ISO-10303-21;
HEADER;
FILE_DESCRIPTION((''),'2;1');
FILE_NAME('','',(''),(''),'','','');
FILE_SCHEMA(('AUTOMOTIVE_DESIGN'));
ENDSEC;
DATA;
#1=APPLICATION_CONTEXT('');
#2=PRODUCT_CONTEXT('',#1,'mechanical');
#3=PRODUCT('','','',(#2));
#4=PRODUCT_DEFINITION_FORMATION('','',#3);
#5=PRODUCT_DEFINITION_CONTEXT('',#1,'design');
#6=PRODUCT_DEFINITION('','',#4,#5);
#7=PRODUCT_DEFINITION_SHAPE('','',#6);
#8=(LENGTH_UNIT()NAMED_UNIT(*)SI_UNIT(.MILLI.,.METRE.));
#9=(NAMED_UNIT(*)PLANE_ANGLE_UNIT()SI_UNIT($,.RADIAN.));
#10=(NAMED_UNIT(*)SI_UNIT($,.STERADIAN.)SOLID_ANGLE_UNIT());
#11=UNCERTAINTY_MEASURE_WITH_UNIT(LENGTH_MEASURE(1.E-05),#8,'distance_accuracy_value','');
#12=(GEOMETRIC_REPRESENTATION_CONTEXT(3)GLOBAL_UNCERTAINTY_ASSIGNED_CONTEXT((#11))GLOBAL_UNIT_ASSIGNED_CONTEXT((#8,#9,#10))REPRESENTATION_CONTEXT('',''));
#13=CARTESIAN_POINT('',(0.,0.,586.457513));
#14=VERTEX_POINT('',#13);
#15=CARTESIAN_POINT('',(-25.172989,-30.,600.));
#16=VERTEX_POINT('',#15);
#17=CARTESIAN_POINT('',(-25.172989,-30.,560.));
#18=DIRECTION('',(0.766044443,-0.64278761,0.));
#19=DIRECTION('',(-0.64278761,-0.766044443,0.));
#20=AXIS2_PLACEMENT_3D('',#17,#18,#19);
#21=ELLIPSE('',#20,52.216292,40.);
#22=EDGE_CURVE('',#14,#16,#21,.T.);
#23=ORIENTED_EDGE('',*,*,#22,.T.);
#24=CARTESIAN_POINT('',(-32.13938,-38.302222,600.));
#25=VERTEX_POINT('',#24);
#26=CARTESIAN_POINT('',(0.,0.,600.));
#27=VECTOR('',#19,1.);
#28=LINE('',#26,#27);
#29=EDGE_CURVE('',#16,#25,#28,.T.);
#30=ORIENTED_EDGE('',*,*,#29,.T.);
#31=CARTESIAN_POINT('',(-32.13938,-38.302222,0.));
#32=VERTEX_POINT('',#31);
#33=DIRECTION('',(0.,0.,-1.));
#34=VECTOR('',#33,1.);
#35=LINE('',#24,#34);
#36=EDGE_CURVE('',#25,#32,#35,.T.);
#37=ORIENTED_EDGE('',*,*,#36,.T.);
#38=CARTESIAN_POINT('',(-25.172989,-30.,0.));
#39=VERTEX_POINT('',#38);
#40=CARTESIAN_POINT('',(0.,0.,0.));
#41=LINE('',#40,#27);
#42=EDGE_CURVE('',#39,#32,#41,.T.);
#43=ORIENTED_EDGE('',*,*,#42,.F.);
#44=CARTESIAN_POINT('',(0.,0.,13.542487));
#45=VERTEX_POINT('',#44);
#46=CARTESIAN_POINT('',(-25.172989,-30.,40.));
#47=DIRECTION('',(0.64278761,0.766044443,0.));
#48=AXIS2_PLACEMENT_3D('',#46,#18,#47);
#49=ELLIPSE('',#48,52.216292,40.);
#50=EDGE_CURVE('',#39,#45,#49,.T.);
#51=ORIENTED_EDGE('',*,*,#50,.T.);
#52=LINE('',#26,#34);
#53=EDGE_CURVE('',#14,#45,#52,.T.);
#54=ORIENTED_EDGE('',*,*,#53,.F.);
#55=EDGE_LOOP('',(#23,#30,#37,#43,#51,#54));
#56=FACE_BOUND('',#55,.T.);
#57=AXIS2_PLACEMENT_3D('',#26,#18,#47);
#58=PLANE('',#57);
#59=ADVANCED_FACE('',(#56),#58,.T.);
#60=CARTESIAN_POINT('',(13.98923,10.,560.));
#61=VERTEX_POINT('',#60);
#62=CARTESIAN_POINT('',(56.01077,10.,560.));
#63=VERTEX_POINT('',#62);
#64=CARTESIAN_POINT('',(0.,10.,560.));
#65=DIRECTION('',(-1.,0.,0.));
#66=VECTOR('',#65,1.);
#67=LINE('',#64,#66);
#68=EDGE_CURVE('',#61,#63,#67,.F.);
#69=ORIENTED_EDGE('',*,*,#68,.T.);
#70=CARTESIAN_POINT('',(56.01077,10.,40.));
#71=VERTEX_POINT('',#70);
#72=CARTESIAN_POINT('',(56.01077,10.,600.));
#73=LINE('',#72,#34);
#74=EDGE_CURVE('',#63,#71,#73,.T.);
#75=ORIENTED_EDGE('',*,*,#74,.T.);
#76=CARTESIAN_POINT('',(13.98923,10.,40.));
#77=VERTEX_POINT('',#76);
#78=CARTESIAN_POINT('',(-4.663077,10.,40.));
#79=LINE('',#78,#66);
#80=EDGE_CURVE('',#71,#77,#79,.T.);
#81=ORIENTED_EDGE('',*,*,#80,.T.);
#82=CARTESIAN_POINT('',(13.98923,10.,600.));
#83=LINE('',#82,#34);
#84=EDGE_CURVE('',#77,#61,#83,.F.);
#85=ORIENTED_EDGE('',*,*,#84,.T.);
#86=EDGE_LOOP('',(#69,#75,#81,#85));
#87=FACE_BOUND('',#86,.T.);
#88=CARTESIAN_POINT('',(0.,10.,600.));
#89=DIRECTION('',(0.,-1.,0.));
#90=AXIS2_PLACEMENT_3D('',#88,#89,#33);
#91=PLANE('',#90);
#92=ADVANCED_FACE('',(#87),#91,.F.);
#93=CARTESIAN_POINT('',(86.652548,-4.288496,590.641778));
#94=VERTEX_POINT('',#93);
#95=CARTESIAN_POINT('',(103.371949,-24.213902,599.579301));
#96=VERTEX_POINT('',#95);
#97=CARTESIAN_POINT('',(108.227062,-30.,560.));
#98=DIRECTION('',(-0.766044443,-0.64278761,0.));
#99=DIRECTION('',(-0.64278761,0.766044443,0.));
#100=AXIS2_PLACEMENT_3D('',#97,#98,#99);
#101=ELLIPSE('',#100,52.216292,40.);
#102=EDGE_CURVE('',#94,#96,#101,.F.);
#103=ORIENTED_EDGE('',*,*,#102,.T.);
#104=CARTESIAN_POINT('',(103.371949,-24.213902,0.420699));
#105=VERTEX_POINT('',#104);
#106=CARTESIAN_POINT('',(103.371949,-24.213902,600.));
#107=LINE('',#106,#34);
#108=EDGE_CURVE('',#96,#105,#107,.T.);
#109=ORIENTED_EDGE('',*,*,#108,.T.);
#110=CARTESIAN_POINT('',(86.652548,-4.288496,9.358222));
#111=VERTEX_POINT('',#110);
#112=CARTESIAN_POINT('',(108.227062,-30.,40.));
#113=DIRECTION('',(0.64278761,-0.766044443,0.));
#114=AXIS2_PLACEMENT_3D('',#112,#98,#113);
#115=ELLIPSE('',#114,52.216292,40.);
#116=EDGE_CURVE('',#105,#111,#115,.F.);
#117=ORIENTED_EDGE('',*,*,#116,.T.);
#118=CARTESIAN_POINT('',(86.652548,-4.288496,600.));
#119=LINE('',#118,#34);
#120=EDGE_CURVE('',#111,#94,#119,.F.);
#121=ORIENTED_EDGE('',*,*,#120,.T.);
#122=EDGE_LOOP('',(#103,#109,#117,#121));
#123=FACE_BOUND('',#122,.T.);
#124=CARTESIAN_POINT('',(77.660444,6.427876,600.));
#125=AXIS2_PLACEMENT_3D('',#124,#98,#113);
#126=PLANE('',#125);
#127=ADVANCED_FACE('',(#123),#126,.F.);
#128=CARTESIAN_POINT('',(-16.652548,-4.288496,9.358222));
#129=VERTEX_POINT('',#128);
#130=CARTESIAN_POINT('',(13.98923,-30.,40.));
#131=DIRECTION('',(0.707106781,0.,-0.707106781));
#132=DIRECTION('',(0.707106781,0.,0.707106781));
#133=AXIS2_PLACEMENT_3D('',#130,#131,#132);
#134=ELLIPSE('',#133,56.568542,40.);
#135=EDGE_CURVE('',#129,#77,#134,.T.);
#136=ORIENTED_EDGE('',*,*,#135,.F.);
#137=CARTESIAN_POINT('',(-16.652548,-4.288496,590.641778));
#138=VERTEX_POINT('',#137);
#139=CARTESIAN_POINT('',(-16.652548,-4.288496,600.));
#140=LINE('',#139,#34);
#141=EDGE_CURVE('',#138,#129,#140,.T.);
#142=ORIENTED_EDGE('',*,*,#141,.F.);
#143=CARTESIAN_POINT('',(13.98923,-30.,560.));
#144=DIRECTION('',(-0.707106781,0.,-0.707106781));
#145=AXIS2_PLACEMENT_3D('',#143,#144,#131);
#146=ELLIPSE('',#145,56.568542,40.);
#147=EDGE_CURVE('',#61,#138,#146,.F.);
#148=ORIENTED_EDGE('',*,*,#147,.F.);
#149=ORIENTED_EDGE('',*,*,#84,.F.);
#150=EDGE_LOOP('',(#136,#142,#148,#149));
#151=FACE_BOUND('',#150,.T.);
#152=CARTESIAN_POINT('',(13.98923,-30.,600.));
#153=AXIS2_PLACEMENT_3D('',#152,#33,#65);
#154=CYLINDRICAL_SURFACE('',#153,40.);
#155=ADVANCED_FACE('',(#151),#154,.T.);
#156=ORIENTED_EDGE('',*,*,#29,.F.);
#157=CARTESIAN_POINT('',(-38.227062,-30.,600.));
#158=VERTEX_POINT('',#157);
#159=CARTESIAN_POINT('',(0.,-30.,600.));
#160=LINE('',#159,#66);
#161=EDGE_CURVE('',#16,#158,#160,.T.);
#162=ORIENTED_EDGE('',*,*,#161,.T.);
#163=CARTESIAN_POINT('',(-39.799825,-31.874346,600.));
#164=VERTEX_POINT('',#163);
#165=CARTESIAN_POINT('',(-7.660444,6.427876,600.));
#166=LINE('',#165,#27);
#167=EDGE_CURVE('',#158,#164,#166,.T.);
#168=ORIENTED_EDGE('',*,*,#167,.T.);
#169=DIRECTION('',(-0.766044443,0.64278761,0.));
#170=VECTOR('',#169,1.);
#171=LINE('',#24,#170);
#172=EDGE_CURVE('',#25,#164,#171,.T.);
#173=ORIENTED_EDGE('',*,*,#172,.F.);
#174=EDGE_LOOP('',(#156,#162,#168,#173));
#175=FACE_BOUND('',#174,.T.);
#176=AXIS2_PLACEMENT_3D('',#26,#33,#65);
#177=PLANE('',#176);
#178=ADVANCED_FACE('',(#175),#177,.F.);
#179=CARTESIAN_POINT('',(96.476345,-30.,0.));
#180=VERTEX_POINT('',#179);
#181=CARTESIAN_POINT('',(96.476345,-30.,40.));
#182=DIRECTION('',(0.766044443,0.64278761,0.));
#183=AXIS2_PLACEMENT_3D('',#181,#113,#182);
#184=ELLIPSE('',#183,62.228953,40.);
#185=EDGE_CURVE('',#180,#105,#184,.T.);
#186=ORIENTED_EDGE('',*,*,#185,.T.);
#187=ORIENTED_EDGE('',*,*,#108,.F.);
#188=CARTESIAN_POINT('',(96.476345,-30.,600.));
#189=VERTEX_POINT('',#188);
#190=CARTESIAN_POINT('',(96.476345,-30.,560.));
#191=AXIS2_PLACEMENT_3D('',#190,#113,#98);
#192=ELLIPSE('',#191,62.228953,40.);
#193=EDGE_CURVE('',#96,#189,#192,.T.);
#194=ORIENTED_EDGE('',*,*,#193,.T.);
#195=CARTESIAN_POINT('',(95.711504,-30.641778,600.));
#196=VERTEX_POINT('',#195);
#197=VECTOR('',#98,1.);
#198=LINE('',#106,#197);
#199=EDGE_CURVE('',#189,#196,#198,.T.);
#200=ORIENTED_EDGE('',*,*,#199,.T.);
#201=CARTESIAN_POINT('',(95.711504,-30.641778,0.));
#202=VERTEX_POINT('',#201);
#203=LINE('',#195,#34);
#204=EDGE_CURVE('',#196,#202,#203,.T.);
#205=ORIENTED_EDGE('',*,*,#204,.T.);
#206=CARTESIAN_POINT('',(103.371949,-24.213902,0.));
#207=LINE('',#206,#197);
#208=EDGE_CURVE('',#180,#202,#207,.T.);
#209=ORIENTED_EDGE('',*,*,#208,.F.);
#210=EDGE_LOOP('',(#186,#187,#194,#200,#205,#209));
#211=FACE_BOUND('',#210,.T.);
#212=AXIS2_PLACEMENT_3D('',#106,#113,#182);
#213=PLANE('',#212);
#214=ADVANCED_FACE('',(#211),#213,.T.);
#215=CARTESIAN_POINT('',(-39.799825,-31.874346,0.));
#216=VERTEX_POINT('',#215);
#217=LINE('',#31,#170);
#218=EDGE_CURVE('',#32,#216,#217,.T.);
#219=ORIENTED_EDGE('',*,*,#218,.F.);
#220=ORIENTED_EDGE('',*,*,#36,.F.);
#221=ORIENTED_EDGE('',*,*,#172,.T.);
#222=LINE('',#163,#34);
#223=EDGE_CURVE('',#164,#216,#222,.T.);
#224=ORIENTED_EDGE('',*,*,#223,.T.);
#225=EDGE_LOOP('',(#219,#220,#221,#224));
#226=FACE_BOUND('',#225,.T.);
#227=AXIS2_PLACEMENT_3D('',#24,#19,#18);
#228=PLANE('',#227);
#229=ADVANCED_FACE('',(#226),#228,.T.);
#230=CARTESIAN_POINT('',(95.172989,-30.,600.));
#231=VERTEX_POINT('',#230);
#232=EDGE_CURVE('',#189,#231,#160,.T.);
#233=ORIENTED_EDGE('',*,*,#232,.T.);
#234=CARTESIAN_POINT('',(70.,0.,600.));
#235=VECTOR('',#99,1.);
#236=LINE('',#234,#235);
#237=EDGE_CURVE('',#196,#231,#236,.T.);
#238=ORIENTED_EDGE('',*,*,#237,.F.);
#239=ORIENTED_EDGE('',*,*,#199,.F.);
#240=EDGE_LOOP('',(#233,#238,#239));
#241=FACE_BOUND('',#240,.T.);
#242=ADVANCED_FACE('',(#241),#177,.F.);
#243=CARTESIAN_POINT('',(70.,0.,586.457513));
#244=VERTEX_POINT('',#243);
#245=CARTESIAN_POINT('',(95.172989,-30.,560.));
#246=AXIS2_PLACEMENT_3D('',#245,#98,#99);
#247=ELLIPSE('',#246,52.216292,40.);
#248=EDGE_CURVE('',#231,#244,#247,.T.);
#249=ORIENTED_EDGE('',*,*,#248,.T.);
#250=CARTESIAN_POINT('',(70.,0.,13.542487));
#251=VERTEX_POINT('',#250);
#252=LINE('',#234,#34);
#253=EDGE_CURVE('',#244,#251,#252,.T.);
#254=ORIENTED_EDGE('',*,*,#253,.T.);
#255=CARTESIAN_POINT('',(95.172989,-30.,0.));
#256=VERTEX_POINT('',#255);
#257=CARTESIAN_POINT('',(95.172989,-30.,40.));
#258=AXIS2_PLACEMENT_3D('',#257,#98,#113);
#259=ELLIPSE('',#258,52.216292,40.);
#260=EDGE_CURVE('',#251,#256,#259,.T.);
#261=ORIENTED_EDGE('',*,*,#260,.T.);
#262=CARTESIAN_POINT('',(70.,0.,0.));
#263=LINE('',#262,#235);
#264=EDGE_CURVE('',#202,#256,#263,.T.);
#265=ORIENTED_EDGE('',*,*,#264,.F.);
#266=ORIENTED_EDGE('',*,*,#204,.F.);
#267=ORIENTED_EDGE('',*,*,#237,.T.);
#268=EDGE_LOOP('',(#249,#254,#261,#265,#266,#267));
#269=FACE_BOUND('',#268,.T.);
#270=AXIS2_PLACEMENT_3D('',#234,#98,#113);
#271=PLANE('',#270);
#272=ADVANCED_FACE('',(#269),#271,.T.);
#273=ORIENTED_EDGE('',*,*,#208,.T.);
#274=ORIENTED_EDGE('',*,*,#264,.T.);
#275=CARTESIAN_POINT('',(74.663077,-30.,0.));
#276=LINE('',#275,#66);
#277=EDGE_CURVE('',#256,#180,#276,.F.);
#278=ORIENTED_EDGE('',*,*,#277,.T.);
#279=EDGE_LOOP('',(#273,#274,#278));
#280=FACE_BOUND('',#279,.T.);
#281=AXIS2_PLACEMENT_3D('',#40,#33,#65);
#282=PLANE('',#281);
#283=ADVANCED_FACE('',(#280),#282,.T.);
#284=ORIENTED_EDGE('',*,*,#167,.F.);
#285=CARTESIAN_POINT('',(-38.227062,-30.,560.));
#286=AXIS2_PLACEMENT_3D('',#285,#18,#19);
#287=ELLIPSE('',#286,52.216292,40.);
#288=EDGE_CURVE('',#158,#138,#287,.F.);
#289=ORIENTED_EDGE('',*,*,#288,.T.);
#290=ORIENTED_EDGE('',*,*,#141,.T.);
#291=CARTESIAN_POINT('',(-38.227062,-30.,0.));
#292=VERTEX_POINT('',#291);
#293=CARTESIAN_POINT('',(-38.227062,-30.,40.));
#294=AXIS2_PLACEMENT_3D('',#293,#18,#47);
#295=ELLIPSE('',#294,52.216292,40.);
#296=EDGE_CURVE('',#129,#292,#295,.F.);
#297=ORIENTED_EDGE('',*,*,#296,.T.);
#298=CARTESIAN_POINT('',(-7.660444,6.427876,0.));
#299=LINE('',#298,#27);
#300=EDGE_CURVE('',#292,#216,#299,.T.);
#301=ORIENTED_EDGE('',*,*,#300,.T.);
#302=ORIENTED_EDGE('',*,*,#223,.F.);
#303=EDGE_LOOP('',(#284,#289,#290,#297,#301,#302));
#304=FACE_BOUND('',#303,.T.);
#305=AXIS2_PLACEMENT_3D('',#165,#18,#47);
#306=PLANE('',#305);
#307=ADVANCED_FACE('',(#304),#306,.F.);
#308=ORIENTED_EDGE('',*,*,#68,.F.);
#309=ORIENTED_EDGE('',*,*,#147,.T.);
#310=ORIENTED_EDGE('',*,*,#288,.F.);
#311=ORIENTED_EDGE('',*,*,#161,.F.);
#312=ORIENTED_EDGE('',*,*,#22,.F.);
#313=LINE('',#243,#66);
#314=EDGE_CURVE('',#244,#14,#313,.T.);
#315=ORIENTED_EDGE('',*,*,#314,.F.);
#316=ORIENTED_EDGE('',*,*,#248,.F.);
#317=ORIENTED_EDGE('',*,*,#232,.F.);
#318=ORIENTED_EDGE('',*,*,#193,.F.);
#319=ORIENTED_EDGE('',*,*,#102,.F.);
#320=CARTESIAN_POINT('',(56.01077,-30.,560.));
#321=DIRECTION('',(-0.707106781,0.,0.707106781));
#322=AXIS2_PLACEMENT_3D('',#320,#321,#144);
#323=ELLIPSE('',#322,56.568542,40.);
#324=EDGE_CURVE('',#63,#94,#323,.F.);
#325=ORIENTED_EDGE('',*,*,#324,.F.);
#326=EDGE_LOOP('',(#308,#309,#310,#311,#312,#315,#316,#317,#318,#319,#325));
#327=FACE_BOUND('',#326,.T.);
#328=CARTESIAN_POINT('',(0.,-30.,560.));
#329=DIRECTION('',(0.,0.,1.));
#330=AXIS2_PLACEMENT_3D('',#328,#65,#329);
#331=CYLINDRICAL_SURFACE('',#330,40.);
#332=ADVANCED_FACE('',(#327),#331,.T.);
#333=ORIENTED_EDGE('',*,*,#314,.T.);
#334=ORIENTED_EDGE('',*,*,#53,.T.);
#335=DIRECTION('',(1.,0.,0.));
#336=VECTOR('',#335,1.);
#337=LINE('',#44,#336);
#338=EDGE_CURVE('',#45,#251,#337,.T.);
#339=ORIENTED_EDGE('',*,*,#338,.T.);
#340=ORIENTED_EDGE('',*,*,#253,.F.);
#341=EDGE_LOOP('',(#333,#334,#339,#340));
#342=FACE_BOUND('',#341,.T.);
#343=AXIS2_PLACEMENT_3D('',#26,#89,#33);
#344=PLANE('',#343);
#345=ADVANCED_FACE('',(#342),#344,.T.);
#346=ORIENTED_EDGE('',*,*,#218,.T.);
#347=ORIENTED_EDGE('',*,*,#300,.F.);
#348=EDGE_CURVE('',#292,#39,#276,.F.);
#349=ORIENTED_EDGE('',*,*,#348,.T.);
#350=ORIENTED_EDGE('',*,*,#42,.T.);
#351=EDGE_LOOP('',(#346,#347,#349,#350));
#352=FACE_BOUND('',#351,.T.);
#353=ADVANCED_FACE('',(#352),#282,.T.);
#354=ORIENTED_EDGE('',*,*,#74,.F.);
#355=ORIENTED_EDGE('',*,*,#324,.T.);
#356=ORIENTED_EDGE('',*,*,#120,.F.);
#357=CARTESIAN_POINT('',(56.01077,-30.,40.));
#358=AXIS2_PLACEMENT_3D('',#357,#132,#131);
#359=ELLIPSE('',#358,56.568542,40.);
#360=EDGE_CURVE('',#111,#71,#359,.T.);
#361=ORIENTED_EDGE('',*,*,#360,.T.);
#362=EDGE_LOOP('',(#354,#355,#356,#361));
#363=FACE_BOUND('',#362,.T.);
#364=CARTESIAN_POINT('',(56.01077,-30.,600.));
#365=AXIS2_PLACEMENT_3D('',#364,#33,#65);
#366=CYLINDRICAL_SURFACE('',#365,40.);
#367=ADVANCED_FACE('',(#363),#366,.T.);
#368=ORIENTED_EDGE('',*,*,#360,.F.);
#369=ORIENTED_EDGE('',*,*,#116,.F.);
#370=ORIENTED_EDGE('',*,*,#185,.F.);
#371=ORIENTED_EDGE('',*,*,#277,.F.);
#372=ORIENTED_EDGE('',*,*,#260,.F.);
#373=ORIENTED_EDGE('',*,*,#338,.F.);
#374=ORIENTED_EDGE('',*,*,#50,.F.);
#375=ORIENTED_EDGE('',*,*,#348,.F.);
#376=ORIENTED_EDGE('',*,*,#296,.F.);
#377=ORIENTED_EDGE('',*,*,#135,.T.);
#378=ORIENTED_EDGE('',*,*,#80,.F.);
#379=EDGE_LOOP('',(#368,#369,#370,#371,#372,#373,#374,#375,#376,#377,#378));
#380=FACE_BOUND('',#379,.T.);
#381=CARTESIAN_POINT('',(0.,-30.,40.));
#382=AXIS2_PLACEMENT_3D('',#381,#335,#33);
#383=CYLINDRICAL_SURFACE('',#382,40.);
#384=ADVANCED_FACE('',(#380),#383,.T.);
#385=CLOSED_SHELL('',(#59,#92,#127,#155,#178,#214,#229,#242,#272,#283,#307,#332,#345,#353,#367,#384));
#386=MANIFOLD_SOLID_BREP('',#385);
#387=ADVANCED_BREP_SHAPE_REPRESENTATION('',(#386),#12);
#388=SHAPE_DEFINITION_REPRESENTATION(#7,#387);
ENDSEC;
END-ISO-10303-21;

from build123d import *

# Parameters (mm, degrees)
EXTRUDE_THIN1_DEPTH = 600
FILLET2_R           = 40


with BuildPart() as part:
    # Sketch1 → Extrude-Thin1 (new body)
    with BuildSketch(Plane.XY):
        Polygon((-32.139380484, -38.302222156), (0, 0), (70, 0), (95.711504387, -30.641777725), (103.371948819, -24.213901628), (74.663076582, 10), (-4.663076582, 10), (-39.799824916, -31.874346059), align=None)
    extrude(amount=EXTRUDE_THIN1_DEPTH)

    # Fillet2
    # the kernel refuses this fillet: 40 mm, written as the material it takes off along each edge
    with BuildSketch(Plane(origin=(74.663076582, 10, -46.630765815), x_dir=(0.6427876096865376, -0.7660444431189795, 0), z_dir=(0, 0, 1)), Plane(origin=(-4.663076582, 10, -46.630765815), x_dir=(1, 0, 0), z_dir=(0, 0, 1))) as fillet2_piece_1:
        with BuildLine():
            CenterArc((FILLET2_R * 0.466307658155, -FILLET2_R), FILLET2_R, 90, 50)
            Line((-FILLET2_R * 0.299736784964, -FILLET2_R * 0.357212390313), (0, 0))
            Line((0, 0), (FILLET2_R * 0.466307658155, 0))
        make_face()
    extrude(amount=693.261531631, mode=Mode.SUBTRACT)
    with BuildSketch(Plane(origin=(174.663076582, 10, 600), x_dir=(0, 0, -1), z_dir=(-1, 0, 0))) as fillet2_piece_2:
        with BuildLine():
            CenterArc((FILLET2_R, FILLET2_R), FILLET2_R, 180, 90)
            Line((0, FILLET2_R), (0, 0))
            Line((0, 0), (FILLET2_R, 0))
        make_face()
    extrude(amount=279.326153163, mode=Mode.SUBTRACT)
    with BuildSketch(Plane(origin=(174.663076582, 10, 0), x_dir=(0, 0, 1), z_dir=(-1, 0, 0))) as fillet2_piece_3:
        with BuildLine():
            CenterArc((FILLET2_R, -FILLET2_R), FILLET2_R, 90, 90)
            Line((0, -FILLET2_R), (0, 0))
            Line((0, 0), (FILLET2_R, 0))
        make_face()
    extrude(amount=279.326153163, mode=Mode.SUBTRACT)


solid = part.part
